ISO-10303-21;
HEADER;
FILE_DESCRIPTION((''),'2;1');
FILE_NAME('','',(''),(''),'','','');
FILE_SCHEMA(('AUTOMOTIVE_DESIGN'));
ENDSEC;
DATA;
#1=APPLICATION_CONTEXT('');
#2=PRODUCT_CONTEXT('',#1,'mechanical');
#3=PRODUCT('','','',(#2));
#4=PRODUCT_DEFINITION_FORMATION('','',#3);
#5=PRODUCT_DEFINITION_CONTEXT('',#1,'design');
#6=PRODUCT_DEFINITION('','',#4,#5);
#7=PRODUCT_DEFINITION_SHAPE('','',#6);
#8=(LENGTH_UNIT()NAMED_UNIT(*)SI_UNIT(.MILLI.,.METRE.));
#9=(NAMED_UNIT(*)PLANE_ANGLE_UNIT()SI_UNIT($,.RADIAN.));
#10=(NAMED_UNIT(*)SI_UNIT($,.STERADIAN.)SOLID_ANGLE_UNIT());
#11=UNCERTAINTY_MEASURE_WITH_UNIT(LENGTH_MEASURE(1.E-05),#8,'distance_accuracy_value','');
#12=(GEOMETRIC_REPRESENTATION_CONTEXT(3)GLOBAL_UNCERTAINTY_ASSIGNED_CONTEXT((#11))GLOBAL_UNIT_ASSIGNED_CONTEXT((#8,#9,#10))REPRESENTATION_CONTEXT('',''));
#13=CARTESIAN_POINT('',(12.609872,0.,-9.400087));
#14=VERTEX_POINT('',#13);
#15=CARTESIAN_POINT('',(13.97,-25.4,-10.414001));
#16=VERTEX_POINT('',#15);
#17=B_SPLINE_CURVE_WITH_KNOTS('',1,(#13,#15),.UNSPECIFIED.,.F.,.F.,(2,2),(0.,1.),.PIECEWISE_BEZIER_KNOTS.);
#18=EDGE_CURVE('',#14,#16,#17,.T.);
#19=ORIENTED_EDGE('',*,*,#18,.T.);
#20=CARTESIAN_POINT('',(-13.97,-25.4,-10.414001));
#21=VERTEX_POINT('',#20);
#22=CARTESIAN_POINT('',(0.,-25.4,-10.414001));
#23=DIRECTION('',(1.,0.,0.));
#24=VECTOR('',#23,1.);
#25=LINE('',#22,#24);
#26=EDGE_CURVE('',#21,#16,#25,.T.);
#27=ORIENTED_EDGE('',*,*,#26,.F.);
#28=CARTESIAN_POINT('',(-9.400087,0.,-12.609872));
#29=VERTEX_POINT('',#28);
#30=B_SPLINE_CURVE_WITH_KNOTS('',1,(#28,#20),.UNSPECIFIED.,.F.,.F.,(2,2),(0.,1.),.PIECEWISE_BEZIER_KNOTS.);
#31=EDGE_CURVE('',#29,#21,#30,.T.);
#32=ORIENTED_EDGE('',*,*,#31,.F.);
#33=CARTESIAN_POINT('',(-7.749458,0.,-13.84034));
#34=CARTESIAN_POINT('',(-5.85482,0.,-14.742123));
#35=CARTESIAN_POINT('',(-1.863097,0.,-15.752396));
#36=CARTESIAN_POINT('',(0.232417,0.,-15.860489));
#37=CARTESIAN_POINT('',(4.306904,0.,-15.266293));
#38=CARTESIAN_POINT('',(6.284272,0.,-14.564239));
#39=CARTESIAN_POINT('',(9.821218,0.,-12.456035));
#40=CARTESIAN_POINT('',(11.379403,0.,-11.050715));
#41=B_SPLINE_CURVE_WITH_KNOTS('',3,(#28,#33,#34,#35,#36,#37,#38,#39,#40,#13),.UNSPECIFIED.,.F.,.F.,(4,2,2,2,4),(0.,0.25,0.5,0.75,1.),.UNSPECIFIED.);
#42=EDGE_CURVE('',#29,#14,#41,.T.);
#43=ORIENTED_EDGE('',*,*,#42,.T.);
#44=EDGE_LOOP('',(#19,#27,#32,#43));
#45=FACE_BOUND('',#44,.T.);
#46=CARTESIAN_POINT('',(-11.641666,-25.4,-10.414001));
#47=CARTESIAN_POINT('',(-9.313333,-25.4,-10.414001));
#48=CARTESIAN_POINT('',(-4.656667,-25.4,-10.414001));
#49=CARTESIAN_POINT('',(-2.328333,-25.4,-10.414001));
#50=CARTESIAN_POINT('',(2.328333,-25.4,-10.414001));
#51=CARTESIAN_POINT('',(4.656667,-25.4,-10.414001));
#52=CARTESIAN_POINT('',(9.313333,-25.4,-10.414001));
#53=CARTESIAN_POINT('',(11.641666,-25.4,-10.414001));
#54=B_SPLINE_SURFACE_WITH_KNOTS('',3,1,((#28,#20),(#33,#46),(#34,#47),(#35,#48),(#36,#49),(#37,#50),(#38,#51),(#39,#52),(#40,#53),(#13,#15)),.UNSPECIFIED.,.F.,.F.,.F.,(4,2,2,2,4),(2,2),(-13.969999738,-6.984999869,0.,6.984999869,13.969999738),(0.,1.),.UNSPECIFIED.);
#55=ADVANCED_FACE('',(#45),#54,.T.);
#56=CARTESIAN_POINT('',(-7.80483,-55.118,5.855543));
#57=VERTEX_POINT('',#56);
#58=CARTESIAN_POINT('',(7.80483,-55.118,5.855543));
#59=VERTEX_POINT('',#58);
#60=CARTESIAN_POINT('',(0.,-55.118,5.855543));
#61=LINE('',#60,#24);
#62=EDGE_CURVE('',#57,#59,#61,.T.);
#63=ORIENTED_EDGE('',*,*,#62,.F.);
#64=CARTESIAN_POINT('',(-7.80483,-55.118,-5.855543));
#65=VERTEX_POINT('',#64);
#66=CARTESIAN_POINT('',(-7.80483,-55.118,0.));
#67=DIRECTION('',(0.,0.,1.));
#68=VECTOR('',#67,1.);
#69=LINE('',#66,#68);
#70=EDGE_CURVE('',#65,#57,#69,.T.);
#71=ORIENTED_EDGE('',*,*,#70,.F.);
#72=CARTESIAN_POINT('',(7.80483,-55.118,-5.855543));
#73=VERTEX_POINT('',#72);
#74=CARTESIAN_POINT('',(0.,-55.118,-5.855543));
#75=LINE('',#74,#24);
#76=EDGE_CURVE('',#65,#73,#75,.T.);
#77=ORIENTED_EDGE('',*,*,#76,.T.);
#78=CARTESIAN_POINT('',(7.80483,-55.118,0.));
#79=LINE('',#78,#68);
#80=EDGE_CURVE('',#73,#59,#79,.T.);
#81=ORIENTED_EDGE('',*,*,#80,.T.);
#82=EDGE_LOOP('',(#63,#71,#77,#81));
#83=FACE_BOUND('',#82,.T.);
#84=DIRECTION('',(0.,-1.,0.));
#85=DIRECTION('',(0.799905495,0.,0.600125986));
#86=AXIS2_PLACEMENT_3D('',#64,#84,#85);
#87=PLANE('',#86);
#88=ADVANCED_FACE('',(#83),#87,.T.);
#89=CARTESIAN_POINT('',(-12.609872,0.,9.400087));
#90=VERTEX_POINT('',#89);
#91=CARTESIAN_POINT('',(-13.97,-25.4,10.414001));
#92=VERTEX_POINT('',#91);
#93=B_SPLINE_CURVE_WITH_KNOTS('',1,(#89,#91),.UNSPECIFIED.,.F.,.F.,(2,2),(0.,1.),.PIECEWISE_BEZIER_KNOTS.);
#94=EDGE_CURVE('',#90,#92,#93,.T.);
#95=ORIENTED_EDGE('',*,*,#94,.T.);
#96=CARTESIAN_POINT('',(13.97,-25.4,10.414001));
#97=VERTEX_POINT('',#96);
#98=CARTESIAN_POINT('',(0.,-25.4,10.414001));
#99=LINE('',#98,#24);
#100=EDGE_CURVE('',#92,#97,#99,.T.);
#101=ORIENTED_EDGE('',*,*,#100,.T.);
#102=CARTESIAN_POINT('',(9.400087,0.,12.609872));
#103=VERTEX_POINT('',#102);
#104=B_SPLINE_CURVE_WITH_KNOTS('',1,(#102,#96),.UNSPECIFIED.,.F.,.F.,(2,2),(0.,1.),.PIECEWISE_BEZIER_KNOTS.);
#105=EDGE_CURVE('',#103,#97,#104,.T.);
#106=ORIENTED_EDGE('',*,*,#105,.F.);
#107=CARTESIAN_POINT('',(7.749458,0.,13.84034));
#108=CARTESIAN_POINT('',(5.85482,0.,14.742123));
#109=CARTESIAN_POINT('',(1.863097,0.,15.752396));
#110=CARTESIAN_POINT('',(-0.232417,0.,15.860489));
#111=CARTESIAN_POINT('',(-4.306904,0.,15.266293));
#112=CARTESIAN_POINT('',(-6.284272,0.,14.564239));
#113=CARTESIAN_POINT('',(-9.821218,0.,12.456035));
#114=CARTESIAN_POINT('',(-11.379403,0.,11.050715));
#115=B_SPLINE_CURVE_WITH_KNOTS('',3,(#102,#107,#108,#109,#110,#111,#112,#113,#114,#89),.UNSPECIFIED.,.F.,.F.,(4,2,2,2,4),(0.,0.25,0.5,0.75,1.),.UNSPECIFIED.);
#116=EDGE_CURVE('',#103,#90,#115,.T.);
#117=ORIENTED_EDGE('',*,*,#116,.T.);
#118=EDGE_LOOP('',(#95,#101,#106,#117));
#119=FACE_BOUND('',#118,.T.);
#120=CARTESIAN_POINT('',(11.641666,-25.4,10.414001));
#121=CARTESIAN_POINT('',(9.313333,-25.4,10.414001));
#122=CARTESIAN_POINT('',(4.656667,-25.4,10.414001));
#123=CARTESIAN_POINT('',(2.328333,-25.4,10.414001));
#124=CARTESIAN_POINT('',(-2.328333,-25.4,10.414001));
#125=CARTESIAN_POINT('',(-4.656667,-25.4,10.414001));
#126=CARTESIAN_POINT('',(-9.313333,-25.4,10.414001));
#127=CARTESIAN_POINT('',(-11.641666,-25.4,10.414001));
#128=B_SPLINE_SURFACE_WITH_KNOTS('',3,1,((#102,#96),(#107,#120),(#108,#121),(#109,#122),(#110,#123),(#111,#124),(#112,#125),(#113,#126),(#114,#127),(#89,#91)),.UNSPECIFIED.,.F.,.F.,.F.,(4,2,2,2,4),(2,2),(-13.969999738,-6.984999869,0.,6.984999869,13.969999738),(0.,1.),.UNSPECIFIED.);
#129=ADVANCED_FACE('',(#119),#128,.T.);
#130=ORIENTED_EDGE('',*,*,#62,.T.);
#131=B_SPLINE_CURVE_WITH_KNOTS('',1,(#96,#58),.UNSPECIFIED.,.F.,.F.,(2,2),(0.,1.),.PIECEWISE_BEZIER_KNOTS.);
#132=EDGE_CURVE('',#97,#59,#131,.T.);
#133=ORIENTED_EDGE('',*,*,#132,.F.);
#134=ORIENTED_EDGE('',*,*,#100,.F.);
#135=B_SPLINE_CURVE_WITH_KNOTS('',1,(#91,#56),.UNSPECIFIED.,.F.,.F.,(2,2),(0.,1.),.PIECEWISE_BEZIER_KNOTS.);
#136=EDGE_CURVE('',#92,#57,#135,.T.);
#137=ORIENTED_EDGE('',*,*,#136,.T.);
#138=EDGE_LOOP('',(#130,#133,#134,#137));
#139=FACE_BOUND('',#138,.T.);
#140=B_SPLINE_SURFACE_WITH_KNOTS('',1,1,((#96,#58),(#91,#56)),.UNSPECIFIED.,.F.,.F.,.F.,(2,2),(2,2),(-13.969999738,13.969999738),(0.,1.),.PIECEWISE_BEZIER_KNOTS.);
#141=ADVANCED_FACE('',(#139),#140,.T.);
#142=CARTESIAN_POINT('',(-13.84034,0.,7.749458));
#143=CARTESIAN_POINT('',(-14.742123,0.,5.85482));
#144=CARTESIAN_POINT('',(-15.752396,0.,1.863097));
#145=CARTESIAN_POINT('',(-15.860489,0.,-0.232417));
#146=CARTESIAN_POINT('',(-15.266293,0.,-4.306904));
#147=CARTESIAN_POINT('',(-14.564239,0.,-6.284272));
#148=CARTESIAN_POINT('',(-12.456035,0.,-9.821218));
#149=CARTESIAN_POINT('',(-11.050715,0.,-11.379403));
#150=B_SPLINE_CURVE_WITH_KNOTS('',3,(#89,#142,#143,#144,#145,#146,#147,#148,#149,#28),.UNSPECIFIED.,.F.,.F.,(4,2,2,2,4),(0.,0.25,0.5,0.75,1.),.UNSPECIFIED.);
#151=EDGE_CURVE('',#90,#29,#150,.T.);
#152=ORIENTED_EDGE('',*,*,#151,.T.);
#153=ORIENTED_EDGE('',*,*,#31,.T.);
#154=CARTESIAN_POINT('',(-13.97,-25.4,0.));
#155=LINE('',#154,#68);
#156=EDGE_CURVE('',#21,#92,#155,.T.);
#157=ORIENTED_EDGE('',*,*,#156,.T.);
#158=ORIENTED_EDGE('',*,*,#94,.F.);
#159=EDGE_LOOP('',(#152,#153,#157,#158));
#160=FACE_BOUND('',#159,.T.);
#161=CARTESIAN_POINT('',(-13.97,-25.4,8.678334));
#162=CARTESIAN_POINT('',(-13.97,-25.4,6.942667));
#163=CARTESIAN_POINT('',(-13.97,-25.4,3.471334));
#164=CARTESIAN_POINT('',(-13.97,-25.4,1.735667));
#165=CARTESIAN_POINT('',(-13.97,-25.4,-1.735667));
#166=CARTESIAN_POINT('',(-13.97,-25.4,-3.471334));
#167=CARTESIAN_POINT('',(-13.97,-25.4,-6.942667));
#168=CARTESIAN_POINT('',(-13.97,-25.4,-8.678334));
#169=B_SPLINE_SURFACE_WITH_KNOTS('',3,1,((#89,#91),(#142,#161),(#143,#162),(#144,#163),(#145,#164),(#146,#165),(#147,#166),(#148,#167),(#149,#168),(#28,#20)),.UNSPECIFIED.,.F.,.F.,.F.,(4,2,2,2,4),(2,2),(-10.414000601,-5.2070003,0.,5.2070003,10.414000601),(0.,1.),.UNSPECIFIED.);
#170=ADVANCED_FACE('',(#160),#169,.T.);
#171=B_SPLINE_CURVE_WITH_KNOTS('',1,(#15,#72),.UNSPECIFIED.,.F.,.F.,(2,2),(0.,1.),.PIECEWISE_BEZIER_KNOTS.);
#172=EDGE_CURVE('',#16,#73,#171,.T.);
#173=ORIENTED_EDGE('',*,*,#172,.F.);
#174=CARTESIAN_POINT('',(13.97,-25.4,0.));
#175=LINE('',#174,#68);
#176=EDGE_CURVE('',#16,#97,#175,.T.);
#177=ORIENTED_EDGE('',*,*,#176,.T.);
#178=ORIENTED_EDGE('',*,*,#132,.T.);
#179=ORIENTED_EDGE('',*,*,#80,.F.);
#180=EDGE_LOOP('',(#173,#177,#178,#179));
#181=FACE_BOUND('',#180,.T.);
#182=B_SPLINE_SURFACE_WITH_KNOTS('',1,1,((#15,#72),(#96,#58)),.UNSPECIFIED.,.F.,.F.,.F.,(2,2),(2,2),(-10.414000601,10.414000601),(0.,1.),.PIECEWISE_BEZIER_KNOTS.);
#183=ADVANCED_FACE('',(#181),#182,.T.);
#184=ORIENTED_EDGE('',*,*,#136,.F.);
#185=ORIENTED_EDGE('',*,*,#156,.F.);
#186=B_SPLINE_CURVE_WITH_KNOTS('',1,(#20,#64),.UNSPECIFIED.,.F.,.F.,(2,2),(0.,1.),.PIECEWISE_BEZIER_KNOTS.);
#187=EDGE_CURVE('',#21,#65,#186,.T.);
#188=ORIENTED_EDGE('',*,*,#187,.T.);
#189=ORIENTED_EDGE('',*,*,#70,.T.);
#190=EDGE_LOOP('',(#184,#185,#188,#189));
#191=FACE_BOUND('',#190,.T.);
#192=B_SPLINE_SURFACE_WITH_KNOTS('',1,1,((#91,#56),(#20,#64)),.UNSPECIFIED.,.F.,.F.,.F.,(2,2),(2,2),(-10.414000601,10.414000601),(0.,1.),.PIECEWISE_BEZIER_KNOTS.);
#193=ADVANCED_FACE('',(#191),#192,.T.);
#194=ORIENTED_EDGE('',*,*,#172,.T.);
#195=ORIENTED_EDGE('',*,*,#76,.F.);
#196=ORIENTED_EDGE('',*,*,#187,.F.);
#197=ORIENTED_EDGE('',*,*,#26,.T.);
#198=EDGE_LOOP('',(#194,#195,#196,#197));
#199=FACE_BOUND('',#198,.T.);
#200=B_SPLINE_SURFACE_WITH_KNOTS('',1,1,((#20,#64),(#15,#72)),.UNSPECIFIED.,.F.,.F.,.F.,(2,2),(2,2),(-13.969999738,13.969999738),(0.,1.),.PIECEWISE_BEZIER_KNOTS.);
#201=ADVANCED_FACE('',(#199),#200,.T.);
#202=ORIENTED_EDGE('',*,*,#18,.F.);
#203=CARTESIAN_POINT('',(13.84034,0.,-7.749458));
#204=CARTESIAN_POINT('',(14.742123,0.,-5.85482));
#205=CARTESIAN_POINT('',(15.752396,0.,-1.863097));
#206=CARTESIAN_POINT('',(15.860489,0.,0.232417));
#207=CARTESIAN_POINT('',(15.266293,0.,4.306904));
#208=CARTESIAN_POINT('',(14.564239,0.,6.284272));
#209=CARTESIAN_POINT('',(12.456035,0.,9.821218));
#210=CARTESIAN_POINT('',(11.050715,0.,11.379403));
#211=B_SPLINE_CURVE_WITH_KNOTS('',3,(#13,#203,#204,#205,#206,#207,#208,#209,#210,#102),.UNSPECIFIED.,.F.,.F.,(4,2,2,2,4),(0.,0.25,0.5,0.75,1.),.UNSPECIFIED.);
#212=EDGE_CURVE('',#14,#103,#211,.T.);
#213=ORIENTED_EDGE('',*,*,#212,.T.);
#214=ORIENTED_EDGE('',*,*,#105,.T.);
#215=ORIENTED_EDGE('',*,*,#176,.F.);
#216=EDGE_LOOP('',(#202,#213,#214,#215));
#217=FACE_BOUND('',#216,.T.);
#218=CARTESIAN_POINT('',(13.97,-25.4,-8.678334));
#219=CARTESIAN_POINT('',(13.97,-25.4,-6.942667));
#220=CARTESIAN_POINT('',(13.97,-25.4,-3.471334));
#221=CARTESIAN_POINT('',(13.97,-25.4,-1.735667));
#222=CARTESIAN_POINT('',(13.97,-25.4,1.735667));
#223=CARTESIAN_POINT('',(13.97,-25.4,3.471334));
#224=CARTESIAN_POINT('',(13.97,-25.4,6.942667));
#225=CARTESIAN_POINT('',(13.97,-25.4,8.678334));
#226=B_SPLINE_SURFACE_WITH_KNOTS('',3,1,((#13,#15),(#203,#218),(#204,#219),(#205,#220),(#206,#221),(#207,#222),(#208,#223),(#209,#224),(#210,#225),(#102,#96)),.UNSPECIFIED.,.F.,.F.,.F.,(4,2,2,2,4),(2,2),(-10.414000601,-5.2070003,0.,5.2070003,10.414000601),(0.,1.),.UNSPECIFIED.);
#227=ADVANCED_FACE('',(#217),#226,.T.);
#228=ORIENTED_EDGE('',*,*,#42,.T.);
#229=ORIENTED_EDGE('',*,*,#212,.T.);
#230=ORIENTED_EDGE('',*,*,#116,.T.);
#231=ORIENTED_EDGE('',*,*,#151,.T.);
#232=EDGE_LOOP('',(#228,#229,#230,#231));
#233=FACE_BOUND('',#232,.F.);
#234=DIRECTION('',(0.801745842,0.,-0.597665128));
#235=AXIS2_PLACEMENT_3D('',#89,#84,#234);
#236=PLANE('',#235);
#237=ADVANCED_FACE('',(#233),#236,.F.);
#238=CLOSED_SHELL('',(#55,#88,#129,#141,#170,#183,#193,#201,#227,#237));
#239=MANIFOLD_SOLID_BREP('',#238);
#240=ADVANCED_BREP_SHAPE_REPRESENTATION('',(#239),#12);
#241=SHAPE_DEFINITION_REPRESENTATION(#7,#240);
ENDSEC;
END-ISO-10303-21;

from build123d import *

# Parameters (mm, degrees)
F2_W      = 27.9399994761
F2_H      = 20.8280012012
F3_FACE_W = 27.9399994761
F3_FACE_H = 20.8280012012
F5_W      = 15.6096592546
F5_H      = 11.7110861465


# Not quite as in the source:
# - the arcs of a loft's sections are written as splines that run evenly, so that the points pair up as in the source's solid


with BuildPart() as f3:
    # F0 (on Front) → F3 section 0
    with BuildSketch(Plane.XZ):
        with BuildLine():
            add(Edge.make_bspline(
                [(-12.6098715409, 9.4000867761), (-13.8403400225, 7.7494584513), (-14.7421231636, 5.8548204804), (-15.7523962289, 1.8630972263), (-15.8604886539, -0.2324174842), (-15.2662929053, -4.3069036624), (-14.5642385224, -6.2842719937), (-12.4560348761, -9.8212175107), (-11.050715101, -11.3794030593), (-9.4000867761, -12.6098715409)],
                knots=[0, 0, 0, 0, 0.25, 0.25, 0.5, 0.5, 0.75, 0.75, 1, 1, 1, 1], degree=3))
            add(Edge.make_bspline(
                [(-9.4000867761, -12.6098715409), (-7.7494584513, -13.8403400225), (-5.8548204804, -14.7421231636), (-1.8630972263, -15.7523962289), (0.2324174842, -15.8604886539), (4.3069036624, -15.2662929053), (6.2842719937, -14.5642385224), (9.8212175107, -12.4560348761), (11.3794030593, -11.050715101), (12.6098715409, -9.4000867761)],
                knots=[0, 0, 0, 0, 0.25, 0.25, 0.5, 0.5, 0.75, 0.75, 1, 1, 1, 1], degree=3))
            add(Edge.make_bspline(
                [(12.6098715409, -9.4000867761), (13.8403400225, -7.7494584513), (14.7421231636, -5.8548204804), (15.7523962289, -1.8630972263), (15.8604886539, 0.2324174842), (15.2662929053, 4.3069036624), (14.5642385224, 6.2842719937), (12.4560348761, 9.8212175107), (11.050715101, 11.3794030593), (9.4000867761, 12.6098715409)],
                knots=[0, 0, 0, 0, 0.25, 0.25, 0.5, 0.5, 0.75, 0.75, 1, 1, 1, 1], degree=3))
            add(Edge.make_bspline(
                [(9.4000867761, 12.6098715409), (7.7494584513, 13.8403400225), (5.8548204804, 14.7421231636), (1.8630972263, 15.7523962289), (-0.2324174842, 15.8604886539), (-4.3069036624, 15.2662929053), (-6.2842719937, 14.5642385224), (-9.8212175107, 12.4560348761), (-11.3794030593, 11.050715101), (-12.6098715409, 9.4000867761)],
                knots=[0, 0, 0, 0, 0.25, 0.25, 0.5, 0.5, 0.75, 0.75, 1, 1, 1, 1], degree=3))
        make_face()
    # F2 (on offset) → F3 section 1
    with BuildSketch(Plane.XZ.offset(25.4)):
        Rectangle(F2_W, F2_H)
    loft(ruled=True)

    # F3_face (on face) → F6 section 0
    with BuildSketch(Plane.XZ.offset(25.4)):
        Rectangle(F3_FACE_W, F3_FACE_H)
    # F5 (on offset) → F6 section 1
    with BuildSketch(Plane.XZ.offset(55.118)):
        Rectangle(F5_W, F5_H)
    loft()


solid = f3.part
